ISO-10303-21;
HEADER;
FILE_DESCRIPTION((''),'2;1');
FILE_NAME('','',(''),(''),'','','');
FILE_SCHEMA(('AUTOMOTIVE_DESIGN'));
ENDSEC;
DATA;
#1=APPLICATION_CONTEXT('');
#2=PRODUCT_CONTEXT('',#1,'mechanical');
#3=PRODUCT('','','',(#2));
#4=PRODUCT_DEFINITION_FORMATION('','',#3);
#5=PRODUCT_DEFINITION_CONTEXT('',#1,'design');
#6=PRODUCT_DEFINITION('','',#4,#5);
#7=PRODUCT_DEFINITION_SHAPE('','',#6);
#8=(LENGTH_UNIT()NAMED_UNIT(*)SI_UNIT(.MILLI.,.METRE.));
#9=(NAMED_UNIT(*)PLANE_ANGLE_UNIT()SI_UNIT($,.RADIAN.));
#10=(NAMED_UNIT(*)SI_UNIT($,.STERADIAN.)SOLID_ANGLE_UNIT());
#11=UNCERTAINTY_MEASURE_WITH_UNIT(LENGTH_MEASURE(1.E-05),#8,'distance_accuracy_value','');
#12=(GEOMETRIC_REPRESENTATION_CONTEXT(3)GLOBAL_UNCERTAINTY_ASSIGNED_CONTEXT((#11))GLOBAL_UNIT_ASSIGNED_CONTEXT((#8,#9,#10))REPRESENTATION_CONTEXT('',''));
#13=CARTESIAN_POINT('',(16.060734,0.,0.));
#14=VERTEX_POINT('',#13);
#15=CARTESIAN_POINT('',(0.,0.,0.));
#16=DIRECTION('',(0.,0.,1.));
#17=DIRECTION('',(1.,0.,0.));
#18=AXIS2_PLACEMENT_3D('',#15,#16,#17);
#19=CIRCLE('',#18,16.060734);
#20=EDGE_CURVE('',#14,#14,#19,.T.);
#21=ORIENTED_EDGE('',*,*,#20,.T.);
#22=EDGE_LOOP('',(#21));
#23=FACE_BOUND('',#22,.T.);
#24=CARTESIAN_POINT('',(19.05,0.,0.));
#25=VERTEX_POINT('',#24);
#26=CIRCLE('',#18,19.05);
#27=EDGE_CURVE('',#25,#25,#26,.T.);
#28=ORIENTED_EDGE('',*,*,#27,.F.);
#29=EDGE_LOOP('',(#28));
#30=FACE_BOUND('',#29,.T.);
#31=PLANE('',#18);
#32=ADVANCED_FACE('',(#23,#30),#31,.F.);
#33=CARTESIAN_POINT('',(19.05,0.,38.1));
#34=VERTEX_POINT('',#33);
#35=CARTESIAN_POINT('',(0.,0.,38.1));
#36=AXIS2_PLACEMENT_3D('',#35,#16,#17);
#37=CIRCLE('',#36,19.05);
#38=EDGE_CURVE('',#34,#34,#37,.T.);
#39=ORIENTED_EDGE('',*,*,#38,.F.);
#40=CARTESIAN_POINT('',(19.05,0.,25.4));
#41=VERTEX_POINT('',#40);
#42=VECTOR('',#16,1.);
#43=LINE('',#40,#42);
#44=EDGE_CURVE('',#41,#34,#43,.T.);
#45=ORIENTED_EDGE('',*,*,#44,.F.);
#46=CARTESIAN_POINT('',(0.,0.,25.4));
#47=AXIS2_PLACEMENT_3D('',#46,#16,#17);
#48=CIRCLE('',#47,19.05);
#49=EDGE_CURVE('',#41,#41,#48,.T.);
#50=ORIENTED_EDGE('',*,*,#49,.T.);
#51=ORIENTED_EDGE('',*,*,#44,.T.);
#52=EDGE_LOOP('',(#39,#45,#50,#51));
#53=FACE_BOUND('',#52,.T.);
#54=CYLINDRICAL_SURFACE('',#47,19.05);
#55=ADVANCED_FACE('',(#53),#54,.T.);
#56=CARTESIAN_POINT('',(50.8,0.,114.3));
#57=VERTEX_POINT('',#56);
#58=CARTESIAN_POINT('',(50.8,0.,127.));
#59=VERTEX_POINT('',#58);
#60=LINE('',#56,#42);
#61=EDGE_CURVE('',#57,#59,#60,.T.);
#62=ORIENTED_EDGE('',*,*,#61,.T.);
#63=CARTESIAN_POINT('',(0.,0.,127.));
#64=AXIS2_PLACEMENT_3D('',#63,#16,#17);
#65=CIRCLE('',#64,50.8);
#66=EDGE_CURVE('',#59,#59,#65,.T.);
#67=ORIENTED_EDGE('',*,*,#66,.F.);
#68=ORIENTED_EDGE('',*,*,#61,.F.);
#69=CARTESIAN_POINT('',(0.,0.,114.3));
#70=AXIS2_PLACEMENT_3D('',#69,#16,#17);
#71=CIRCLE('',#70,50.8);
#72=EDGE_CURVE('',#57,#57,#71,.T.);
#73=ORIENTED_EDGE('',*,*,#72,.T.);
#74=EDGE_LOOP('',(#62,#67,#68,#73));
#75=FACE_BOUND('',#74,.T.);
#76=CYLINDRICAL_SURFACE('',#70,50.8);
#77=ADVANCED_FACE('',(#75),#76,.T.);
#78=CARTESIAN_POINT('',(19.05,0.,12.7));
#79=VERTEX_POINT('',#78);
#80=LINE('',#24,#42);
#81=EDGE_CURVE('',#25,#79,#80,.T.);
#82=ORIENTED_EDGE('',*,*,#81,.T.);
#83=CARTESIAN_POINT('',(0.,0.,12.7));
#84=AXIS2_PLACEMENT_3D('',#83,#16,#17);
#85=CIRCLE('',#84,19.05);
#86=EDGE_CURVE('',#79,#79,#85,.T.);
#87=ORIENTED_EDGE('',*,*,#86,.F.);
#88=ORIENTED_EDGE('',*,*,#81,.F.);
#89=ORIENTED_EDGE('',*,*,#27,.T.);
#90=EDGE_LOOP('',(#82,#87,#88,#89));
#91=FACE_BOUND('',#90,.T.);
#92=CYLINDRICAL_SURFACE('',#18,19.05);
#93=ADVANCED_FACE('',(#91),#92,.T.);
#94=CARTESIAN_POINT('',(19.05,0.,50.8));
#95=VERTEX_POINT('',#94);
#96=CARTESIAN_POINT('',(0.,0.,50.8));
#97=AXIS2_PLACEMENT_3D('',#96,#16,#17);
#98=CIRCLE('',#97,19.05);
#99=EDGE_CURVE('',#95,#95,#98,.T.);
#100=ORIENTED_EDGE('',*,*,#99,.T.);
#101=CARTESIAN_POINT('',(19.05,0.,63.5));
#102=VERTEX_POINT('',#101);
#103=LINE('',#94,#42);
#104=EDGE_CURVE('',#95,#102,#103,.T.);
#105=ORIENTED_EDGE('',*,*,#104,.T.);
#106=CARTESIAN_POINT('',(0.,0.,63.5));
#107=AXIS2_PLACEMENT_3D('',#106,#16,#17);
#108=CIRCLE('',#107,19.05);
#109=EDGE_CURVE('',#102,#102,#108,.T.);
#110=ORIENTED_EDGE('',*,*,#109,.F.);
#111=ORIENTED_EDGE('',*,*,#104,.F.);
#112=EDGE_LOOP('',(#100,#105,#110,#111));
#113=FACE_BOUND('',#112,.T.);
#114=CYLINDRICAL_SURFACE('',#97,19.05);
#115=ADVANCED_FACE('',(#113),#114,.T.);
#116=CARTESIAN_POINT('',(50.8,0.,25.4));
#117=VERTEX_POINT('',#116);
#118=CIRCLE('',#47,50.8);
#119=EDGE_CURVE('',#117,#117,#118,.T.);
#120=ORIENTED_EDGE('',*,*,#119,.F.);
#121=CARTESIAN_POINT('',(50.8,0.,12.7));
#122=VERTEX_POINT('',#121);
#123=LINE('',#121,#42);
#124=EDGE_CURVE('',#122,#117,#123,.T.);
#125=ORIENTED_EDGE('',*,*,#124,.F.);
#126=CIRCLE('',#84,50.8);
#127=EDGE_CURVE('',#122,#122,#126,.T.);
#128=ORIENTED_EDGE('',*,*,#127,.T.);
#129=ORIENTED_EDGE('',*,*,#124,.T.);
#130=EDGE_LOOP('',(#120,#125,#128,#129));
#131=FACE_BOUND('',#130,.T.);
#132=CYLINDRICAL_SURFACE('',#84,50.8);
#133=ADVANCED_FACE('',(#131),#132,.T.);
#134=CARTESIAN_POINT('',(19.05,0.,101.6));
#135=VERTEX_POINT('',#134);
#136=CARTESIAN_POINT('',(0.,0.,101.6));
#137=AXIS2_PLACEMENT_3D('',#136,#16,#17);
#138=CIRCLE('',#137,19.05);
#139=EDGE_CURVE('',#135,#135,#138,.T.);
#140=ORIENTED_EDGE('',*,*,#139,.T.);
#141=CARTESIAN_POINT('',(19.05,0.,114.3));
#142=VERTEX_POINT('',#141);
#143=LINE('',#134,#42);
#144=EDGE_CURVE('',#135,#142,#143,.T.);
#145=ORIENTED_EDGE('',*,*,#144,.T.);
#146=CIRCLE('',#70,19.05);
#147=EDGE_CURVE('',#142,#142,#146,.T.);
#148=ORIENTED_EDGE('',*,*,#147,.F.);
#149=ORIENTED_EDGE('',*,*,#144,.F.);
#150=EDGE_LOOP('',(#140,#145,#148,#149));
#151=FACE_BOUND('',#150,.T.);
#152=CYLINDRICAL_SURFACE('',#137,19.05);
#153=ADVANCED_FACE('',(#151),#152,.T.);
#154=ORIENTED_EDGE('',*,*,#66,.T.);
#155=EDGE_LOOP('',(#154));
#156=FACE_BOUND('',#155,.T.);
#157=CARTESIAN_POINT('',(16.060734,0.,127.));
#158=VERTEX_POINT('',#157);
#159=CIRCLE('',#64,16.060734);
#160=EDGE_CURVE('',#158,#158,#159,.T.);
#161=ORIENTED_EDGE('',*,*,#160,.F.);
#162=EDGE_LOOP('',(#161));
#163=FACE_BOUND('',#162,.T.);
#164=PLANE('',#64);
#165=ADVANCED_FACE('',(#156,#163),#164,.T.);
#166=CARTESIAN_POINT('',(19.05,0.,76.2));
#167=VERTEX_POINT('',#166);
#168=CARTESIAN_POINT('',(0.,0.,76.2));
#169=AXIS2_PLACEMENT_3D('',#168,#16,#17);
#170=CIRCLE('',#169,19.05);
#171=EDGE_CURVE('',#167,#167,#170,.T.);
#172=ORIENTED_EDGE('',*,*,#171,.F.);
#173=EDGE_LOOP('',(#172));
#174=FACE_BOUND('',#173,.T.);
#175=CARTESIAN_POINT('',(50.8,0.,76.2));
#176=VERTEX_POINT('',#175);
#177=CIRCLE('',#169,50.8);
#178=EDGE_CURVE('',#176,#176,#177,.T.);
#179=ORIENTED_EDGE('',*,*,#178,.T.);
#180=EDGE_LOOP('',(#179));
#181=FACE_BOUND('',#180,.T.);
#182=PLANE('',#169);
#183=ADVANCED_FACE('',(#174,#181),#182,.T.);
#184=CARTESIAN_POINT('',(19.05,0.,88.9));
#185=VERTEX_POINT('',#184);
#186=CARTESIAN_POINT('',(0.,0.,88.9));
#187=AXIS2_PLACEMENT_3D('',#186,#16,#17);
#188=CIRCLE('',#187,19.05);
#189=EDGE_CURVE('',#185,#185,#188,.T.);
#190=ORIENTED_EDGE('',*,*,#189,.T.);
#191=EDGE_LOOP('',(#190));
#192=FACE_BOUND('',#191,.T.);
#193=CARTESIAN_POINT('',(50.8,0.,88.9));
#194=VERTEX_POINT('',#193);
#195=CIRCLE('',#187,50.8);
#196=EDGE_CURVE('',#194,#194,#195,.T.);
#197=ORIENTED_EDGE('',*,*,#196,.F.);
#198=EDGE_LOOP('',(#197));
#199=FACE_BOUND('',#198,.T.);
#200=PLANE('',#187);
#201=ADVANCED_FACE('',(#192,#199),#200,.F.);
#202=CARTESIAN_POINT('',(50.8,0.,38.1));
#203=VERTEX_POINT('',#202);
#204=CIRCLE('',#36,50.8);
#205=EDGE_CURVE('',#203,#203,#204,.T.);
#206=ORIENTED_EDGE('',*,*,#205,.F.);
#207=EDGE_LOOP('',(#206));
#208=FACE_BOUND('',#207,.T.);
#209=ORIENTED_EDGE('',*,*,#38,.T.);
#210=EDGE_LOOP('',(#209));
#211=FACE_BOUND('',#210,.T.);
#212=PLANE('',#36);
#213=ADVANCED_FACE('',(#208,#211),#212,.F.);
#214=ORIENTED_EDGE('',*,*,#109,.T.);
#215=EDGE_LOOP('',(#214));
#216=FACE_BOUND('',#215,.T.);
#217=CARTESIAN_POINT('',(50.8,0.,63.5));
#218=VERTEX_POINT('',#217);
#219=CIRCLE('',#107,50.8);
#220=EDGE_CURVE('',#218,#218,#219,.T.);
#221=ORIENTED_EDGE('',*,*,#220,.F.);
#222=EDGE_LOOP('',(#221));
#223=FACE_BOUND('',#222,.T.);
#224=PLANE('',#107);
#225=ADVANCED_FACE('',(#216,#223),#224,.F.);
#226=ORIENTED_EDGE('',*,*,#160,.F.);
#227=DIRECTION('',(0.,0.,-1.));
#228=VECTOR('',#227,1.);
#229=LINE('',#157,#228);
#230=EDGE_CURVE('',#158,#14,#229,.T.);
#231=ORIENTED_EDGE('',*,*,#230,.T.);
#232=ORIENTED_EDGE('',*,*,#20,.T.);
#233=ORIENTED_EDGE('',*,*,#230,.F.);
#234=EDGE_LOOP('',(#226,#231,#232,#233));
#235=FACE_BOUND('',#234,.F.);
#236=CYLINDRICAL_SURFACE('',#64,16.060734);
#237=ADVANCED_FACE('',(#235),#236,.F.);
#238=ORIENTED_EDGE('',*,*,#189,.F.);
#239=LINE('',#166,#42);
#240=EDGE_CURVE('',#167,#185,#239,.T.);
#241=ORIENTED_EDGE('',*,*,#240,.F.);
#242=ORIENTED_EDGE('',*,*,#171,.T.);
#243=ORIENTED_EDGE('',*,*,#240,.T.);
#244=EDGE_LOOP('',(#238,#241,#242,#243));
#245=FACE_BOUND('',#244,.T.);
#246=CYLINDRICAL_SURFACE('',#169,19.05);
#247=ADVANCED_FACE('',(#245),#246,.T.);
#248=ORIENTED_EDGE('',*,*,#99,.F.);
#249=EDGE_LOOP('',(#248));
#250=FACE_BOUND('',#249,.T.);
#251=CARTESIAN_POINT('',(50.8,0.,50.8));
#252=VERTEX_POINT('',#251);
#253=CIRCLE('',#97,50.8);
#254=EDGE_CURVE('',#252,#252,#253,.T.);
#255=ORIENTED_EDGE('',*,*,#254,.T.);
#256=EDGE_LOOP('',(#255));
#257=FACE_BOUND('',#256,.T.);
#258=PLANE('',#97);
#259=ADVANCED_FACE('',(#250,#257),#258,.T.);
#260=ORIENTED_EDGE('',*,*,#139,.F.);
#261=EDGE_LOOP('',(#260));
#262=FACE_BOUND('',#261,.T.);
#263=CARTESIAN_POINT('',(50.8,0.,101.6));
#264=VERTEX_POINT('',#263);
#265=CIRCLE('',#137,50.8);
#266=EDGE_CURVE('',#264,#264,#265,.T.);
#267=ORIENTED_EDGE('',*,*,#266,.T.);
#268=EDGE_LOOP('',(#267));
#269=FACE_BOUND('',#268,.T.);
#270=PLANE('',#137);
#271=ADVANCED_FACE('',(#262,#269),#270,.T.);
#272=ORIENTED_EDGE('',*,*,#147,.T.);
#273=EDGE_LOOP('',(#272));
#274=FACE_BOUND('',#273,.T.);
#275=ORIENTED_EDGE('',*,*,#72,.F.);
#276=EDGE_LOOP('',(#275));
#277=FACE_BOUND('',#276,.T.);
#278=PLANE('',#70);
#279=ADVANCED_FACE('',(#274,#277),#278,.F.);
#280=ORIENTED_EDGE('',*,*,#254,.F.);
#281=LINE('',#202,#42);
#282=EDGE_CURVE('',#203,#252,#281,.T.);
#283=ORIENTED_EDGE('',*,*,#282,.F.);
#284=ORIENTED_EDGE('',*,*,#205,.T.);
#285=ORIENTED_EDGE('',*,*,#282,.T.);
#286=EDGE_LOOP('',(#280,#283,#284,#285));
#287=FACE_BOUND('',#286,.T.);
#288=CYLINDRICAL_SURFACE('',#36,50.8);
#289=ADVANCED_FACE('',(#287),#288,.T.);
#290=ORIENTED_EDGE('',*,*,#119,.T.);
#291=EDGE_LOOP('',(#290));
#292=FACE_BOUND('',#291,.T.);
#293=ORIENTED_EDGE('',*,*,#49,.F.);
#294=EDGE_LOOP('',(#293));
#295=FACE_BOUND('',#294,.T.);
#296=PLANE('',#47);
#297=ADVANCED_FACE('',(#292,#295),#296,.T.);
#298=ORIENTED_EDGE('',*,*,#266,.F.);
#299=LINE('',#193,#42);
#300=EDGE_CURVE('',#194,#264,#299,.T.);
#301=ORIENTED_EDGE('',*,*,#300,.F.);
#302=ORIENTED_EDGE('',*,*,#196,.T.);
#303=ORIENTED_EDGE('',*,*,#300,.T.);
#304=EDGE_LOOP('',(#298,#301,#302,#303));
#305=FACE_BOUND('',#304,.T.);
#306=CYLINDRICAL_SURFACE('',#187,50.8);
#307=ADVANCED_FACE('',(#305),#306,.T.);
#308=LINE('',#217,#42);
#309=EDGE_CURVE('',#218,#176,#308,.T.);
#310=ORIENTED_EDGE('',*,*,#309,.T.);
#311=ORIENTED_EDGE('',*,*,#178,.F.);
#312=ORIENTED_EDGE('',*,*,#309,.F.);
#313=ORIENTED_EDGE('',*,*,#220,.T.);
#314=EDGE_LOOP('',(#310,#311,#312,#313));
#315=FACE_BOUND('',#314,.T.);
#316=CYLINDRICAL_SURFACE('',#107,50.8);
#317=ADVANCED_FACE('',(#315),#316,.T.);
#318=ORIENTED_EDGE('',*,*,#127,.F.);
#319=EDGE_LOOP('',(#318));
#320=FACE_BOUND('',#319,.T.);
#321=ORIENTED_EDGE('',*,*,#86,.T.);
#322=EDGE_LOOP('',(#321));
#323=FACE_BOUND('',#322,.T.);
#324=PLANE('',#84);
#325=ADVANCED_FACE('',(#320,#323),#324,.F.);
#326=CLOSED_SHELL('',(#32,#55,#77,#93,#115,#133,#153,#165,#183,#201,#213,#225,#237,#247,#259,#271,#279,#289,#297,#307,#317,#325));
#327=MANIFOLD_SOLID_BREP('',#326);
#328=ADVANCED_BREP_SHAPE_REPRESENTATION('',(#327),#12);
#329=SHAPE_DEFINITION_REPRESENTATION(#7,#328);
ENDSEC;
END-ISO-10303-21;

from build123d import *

# Parameters (mm, degrees)
F3_R     = 18.2754285366
F4_DEPTH = 251
F5_R     = 16.060733565
F6_DEPTH = 127.001


# Not quite as in the source:
# - an extrude ends at something that could not be found from the text; its depth is read off the source's solid


with BuildPart() as f1:
    # F0 (on Front) → F1 (revolve)
    with BuildSketch(Plane.XZ):
        Polygon((0, 127), (0, 0), (19.05, 0), (19.05, 12.7), (50.8, 12.7), (50.8, 25.4), (19.05, 25.4), (19.05, 38.1), (50.8, 38.1), (50.8, 50.8), (19.05, 50.8), (19.05, 63.5), (50.8, 63.5), (50.8, 76.2), (19.05, 76.2), (19.05, 88.9), (50.8, 88.9), (50.8, 101.6), (19.05, 101.6), (19.05, 114.3), (50.8, 114.3), (50.8, 127), align=None)
    revolve(axis=Axis((0, 0, 63.5), (0, 0, 1)))

    # F3 (on face) → F4 (cut, through all)
    with BuildSketch(Plane.XY.offset(127)):
        Circle(F3_R)
    extrude(amount=F4_DEPTH, mode=Mode.SUBTRACT)

    # F5 (on face) → F6 (cut, through all)
    with BuildSketch(Plane.XY.offset(127)):
        Circle(F5_R)
    extrude(amount=-F6_DEPTH, mode=Mode.SUBTRACT)


solid = f1.part
